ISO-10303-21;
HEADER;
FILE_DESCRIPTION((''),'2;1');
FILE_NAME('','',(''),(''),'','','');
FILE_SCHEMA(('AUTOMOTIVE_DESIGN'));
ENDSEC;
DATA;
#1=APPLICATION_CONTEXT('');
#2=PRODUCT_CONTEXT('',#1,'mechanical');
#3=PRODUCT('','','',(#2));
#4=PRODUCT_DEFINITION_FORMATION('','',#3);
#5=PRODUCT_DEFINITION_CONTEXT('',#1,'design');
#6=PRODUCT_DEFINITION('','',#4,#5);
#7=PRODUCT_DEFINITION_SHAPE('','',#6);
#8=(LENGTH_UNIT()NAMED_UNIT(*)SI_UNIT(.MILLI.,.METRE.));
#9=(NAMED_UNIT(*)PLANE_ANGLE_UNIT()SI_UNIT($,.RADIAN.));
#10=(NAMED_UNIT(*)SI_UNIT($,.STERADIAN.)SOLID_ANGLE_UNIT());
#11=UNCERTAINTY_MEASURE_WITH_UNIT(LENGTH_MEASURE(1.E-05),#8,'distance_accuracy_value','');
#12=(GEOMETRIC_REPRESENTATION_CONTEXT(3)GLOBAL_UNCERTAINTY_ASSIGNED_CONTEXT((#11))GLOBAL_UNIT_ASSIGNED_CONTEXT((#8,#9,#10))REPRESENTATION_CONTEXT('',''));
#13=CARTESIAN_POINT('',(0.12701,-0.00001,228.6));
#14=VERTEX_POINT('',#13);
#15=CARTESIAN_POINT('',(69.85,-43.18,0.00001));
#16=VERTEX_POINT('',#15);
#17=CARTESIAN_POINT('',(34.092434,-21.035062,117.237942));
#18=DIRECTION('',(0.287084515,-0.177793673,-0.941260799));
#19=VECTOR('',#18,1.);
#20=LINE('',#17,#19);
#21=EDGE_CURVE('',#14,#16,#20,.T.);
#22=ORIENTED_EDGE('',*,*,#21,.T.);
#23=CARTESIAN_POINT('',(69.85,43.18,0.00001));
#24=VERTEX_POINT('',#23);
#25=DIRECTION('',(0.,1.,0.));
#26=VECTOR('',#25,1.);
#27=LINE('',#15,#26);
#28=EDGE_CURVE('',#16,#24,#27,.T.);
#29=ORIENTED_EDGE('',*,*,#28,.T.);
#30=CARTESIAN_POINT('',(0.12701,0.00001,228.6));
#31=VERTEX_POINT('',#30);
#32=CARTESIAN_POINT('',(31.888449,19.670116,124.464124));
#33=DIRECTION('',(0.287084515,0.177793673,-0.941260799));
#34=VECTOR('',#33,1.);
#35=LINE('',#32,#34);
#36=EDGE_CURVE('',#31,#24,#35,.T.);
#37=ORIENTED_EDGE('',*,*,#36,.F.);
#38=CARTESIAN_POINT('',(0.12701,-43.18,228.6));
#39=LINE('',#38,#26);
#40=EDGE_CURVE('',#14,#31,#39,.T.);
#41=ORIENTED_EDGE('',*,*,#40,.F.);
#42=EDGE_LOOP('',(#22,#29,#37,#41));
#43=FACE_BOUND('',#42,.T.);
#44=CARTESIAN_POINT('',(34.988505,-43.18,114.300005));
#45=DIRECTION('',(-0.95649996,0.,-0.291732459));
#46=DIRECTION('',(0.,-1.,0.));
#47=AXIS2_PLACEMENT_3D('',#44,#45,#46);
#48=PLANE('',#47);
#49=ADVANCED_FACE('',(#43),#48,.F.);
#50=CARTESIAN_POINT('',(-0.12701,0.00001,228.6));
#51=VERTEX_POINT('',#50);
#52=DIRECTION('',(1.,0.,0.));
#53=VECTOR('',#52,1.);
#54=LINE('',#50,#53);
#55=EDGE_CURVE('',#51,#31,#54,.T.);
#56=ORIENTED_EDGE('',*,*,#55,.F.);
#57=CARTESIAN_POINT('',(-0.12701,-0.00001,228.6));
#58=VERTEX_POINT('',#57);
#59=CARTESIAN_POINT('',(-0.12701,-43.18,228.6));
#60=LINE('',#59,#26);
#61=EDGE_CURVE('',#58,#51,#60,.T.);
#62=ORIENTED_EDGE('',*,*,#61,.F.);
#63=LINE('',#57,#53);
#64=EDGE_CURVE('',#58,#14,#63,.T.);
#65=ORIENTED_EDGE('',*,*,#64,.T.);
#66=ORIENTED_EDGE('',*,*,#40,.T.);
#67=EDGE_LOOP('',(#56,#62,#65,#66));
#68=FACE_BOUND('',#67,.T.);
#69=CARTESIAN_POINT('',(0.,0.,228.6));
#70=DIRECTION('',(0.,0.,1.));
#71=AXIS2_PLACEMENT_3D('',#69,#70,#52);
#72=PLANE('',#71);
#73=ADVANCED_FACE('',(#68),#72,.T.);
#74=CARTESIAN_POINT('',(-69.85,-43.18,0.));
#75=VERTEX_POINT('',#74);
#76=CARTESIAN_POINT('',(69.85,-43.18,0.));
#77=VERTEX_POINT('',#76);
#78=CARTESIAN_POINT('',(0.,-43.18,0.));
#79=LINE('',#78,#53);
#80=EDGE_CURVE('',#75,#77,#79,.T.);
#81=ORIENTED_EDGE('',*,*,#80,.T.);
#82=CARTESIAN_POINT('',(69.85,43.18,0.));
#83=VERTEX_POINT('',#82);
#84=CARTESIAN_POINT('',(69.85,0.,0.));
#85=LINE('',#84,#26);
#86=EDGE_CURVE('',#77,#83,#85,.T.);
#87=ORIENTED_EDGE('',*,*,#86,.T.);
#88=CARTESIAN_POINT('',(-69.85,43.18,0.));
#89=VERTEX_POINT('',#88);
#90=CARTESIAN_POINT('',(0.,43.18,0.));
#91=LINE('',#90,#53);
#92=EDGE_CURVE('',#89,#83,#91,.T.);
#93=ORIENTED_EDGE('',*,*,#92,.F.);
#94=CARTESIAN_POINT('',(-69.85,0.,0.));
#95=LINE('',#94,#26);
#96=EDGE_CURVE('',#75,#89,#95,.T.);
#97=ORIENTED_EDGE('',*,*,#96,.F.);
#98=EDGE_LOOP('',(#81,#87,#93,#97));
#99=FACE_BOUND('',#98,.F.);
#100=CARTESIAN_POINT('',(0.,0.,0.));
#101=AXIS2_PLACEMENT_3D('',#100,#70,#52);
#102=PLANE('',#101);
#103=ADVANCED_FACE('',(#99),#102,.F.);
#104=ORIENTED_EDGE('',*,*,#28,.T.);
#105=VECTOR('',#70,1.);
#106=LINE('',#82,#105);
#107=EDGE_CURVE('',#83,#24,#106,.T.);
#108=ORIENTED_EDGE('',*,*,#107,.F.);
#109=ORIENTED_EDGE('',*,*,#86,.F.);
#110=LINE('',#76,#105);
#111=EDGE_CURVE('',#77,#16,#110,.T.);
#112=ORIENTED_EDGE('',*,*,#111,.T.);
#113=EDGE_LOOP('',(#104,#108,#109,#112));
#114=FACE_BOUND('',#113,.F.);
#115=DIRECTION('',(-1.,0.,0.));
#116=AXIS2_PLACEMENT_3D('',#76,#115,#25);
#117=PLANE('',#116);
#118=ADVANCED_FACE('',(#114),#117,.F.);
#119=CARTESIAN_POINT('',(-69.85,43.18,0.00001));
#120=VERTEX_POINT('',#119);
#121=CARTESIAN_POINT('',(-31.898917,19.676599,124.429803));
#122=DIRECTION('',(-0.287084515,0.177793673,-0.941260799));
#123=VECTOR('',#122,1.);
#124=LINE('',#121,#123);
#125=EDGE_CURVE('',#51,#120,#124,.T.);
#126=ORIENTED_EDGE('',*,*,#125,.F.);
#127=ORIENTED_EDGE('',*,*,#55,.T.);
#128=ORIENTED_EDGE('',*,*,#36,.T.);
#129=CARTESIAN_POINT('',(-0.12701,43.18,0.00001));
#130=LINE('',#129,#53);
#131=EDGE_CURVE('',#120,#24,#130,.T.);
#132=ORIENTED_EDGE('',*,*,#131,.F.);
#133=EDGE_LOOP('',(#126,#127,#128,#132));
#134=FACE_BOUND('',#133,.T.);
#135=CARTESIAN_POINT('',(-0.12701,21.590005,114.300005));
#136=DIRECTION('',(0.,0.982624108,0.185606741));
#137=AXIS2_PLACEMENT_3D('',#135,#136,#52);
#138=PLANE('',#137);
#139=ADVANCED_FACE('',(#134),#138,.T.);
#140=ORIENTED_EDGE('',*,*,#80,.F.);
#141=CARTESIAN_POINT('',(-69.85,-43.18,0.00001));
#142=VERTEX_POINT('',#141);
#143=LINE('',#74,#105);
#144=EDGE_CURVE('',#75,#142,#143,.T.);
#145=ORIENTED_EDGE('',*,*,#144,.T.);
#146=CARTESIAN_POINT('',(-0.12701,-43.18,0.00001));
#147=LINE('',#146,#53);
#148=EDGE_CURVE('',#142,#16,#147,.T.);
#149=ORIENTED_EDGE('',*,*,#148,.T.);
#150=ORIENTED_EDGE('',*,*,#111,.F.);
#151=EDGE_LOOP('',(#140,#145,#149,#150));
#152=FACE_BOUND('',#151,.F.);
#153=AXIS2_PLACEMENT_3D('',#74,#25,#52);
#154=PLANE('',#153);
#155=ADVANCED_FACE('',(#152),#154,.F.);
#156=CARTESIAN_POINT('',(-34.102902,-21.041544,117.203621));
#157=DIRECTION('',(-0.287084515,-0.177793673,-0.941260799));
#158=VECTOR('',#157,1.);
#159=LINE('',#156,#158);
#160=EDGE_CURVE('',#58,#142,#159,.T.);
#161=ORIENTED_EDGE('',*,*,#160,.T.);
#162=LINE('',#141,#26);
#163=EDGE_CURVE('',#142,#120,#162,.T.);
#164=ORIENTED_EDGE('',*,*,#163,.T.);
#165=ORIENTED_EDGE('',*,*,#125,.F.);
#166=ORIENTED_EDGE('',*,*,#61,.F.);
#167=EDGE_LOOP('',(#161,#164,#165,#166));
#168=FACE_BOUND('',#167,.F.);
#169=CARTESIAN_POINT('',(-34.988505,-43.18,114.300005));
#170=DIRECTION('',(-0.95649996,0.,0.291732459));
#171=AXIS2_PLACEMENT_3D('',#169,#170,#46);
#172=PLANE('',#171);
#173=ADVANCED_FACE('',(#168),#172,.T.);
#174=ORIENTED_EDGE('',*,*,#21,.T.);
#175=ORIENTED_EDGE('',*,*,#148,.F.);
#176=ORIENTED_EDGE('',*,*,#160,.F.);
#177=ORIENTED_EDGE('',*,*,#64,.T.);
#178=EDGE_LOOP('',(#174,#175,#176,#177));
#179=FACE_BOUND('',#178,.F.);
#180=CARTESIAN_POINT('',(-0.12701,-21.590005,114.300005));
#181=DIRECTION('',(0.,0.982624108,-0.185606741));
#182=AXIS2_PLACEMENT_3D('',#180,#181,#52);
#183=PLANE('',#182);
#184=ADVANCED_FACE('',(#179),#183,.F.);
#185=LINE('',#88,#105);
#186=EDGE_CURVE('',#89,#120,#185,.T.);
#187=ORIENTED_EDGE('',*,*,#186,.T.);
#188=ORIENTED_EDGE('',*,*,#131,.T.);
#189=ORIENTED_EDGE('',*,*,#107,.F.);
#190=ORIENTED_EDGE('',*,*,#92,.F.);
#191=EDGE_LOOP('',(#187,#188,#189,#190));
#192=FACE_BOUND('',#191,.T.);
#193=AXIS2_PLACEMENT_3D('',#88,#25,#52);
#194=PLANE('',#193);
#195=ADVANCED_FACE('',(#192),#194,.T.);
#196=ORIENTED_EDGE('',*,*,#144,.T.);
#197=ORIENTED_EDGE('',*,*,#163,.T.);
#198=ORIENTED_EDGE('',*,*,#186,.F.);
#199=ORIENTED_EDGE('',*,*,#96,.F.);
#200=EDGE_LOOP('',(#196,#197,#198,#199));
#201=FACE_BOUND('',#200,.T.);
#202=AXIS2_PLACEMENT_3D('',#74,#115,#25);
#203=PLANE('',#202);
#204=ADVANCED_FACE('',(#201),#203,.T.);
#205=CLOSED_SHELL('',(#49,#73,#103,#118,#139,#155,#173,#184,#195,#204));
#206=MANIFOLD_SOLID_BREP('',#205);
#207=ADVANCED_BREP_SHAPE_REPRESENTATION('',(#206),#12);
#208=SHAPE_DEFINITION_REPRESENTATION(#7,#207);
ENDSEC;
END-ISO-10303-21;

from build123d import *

# Parameters (mm, degrees)
F0_W       = 139.7
F0_H       = 86.36
F1_DEPTH   = 228.6
F2_SIZE2   = 69.72299
F2_SIZE    = 228.59999
F2_2_SIZE2 = 69.72299
F2_2_SIZE  = 228.59999
F3_SIZE2   = 228.59999
F3_SIZE    = 43.17999


# Not quite as in the source:
# - a fillet or chamfer is up to 0.001 mm smaller than in the source, because OpenCascade refuses the exact size


with BuildPart() as f1:
    # F0 (on Top) → F1 (new body)
    with BuildSketch(Plane.XY):
        Rectangle(F0_W, F0_H)
    extrude(amount=F1_DEPTH)

    # F2 (size 228.6 and 69.723 in the source; OpenCascade refuses exactly that, so slightly less here)
    f2_edges = [f1.edges().sort_by_distance(p)[0] for p in [
        (69.85, 0, 228.6),
    ]]
    f2_side = f1.faces().sort_by_distance((69.85, 0, 114.3))[0]
    chamfer(f2_edges, length=F2_SIZE, length2=F2_SIZE2, reference=f2_side)

    # F2#2 (size 228.6 and 69.723 in the source; OpenCascade refuses exactly that, so slightly less here)
    f2_2_edges = [f1.edges().sort_by_distance(p)[0] for p in [
        (-69.85, 0, 228.6),
    ]]
    f2_2_side = f1.faces().sort_by_distance((-69.85, 0, 114.3))[0]
    chamfer(f2_2_edges, length=F2_2_SIZE, length2=F2_2_SIZE2, reference=f2_2_side)

    # F3 (size 43.18 and 228.6 in the source; OpenCascade refuses exactly that, so slightly less here)
    f3_edges = [f1.edges().sort_by_distance(p)[0] for p in [
        (0, -43.18, 228.6),
        (0, 43.18, 228.6),
    ]]
    f3_side = f1.faces().sort_by_distance((0, 0, 228.6))[0]
    chamfer(f3_edges, length=F3_SIZE, length2=F3_SIZE2, reference=f3_side)


solid = f1.part
